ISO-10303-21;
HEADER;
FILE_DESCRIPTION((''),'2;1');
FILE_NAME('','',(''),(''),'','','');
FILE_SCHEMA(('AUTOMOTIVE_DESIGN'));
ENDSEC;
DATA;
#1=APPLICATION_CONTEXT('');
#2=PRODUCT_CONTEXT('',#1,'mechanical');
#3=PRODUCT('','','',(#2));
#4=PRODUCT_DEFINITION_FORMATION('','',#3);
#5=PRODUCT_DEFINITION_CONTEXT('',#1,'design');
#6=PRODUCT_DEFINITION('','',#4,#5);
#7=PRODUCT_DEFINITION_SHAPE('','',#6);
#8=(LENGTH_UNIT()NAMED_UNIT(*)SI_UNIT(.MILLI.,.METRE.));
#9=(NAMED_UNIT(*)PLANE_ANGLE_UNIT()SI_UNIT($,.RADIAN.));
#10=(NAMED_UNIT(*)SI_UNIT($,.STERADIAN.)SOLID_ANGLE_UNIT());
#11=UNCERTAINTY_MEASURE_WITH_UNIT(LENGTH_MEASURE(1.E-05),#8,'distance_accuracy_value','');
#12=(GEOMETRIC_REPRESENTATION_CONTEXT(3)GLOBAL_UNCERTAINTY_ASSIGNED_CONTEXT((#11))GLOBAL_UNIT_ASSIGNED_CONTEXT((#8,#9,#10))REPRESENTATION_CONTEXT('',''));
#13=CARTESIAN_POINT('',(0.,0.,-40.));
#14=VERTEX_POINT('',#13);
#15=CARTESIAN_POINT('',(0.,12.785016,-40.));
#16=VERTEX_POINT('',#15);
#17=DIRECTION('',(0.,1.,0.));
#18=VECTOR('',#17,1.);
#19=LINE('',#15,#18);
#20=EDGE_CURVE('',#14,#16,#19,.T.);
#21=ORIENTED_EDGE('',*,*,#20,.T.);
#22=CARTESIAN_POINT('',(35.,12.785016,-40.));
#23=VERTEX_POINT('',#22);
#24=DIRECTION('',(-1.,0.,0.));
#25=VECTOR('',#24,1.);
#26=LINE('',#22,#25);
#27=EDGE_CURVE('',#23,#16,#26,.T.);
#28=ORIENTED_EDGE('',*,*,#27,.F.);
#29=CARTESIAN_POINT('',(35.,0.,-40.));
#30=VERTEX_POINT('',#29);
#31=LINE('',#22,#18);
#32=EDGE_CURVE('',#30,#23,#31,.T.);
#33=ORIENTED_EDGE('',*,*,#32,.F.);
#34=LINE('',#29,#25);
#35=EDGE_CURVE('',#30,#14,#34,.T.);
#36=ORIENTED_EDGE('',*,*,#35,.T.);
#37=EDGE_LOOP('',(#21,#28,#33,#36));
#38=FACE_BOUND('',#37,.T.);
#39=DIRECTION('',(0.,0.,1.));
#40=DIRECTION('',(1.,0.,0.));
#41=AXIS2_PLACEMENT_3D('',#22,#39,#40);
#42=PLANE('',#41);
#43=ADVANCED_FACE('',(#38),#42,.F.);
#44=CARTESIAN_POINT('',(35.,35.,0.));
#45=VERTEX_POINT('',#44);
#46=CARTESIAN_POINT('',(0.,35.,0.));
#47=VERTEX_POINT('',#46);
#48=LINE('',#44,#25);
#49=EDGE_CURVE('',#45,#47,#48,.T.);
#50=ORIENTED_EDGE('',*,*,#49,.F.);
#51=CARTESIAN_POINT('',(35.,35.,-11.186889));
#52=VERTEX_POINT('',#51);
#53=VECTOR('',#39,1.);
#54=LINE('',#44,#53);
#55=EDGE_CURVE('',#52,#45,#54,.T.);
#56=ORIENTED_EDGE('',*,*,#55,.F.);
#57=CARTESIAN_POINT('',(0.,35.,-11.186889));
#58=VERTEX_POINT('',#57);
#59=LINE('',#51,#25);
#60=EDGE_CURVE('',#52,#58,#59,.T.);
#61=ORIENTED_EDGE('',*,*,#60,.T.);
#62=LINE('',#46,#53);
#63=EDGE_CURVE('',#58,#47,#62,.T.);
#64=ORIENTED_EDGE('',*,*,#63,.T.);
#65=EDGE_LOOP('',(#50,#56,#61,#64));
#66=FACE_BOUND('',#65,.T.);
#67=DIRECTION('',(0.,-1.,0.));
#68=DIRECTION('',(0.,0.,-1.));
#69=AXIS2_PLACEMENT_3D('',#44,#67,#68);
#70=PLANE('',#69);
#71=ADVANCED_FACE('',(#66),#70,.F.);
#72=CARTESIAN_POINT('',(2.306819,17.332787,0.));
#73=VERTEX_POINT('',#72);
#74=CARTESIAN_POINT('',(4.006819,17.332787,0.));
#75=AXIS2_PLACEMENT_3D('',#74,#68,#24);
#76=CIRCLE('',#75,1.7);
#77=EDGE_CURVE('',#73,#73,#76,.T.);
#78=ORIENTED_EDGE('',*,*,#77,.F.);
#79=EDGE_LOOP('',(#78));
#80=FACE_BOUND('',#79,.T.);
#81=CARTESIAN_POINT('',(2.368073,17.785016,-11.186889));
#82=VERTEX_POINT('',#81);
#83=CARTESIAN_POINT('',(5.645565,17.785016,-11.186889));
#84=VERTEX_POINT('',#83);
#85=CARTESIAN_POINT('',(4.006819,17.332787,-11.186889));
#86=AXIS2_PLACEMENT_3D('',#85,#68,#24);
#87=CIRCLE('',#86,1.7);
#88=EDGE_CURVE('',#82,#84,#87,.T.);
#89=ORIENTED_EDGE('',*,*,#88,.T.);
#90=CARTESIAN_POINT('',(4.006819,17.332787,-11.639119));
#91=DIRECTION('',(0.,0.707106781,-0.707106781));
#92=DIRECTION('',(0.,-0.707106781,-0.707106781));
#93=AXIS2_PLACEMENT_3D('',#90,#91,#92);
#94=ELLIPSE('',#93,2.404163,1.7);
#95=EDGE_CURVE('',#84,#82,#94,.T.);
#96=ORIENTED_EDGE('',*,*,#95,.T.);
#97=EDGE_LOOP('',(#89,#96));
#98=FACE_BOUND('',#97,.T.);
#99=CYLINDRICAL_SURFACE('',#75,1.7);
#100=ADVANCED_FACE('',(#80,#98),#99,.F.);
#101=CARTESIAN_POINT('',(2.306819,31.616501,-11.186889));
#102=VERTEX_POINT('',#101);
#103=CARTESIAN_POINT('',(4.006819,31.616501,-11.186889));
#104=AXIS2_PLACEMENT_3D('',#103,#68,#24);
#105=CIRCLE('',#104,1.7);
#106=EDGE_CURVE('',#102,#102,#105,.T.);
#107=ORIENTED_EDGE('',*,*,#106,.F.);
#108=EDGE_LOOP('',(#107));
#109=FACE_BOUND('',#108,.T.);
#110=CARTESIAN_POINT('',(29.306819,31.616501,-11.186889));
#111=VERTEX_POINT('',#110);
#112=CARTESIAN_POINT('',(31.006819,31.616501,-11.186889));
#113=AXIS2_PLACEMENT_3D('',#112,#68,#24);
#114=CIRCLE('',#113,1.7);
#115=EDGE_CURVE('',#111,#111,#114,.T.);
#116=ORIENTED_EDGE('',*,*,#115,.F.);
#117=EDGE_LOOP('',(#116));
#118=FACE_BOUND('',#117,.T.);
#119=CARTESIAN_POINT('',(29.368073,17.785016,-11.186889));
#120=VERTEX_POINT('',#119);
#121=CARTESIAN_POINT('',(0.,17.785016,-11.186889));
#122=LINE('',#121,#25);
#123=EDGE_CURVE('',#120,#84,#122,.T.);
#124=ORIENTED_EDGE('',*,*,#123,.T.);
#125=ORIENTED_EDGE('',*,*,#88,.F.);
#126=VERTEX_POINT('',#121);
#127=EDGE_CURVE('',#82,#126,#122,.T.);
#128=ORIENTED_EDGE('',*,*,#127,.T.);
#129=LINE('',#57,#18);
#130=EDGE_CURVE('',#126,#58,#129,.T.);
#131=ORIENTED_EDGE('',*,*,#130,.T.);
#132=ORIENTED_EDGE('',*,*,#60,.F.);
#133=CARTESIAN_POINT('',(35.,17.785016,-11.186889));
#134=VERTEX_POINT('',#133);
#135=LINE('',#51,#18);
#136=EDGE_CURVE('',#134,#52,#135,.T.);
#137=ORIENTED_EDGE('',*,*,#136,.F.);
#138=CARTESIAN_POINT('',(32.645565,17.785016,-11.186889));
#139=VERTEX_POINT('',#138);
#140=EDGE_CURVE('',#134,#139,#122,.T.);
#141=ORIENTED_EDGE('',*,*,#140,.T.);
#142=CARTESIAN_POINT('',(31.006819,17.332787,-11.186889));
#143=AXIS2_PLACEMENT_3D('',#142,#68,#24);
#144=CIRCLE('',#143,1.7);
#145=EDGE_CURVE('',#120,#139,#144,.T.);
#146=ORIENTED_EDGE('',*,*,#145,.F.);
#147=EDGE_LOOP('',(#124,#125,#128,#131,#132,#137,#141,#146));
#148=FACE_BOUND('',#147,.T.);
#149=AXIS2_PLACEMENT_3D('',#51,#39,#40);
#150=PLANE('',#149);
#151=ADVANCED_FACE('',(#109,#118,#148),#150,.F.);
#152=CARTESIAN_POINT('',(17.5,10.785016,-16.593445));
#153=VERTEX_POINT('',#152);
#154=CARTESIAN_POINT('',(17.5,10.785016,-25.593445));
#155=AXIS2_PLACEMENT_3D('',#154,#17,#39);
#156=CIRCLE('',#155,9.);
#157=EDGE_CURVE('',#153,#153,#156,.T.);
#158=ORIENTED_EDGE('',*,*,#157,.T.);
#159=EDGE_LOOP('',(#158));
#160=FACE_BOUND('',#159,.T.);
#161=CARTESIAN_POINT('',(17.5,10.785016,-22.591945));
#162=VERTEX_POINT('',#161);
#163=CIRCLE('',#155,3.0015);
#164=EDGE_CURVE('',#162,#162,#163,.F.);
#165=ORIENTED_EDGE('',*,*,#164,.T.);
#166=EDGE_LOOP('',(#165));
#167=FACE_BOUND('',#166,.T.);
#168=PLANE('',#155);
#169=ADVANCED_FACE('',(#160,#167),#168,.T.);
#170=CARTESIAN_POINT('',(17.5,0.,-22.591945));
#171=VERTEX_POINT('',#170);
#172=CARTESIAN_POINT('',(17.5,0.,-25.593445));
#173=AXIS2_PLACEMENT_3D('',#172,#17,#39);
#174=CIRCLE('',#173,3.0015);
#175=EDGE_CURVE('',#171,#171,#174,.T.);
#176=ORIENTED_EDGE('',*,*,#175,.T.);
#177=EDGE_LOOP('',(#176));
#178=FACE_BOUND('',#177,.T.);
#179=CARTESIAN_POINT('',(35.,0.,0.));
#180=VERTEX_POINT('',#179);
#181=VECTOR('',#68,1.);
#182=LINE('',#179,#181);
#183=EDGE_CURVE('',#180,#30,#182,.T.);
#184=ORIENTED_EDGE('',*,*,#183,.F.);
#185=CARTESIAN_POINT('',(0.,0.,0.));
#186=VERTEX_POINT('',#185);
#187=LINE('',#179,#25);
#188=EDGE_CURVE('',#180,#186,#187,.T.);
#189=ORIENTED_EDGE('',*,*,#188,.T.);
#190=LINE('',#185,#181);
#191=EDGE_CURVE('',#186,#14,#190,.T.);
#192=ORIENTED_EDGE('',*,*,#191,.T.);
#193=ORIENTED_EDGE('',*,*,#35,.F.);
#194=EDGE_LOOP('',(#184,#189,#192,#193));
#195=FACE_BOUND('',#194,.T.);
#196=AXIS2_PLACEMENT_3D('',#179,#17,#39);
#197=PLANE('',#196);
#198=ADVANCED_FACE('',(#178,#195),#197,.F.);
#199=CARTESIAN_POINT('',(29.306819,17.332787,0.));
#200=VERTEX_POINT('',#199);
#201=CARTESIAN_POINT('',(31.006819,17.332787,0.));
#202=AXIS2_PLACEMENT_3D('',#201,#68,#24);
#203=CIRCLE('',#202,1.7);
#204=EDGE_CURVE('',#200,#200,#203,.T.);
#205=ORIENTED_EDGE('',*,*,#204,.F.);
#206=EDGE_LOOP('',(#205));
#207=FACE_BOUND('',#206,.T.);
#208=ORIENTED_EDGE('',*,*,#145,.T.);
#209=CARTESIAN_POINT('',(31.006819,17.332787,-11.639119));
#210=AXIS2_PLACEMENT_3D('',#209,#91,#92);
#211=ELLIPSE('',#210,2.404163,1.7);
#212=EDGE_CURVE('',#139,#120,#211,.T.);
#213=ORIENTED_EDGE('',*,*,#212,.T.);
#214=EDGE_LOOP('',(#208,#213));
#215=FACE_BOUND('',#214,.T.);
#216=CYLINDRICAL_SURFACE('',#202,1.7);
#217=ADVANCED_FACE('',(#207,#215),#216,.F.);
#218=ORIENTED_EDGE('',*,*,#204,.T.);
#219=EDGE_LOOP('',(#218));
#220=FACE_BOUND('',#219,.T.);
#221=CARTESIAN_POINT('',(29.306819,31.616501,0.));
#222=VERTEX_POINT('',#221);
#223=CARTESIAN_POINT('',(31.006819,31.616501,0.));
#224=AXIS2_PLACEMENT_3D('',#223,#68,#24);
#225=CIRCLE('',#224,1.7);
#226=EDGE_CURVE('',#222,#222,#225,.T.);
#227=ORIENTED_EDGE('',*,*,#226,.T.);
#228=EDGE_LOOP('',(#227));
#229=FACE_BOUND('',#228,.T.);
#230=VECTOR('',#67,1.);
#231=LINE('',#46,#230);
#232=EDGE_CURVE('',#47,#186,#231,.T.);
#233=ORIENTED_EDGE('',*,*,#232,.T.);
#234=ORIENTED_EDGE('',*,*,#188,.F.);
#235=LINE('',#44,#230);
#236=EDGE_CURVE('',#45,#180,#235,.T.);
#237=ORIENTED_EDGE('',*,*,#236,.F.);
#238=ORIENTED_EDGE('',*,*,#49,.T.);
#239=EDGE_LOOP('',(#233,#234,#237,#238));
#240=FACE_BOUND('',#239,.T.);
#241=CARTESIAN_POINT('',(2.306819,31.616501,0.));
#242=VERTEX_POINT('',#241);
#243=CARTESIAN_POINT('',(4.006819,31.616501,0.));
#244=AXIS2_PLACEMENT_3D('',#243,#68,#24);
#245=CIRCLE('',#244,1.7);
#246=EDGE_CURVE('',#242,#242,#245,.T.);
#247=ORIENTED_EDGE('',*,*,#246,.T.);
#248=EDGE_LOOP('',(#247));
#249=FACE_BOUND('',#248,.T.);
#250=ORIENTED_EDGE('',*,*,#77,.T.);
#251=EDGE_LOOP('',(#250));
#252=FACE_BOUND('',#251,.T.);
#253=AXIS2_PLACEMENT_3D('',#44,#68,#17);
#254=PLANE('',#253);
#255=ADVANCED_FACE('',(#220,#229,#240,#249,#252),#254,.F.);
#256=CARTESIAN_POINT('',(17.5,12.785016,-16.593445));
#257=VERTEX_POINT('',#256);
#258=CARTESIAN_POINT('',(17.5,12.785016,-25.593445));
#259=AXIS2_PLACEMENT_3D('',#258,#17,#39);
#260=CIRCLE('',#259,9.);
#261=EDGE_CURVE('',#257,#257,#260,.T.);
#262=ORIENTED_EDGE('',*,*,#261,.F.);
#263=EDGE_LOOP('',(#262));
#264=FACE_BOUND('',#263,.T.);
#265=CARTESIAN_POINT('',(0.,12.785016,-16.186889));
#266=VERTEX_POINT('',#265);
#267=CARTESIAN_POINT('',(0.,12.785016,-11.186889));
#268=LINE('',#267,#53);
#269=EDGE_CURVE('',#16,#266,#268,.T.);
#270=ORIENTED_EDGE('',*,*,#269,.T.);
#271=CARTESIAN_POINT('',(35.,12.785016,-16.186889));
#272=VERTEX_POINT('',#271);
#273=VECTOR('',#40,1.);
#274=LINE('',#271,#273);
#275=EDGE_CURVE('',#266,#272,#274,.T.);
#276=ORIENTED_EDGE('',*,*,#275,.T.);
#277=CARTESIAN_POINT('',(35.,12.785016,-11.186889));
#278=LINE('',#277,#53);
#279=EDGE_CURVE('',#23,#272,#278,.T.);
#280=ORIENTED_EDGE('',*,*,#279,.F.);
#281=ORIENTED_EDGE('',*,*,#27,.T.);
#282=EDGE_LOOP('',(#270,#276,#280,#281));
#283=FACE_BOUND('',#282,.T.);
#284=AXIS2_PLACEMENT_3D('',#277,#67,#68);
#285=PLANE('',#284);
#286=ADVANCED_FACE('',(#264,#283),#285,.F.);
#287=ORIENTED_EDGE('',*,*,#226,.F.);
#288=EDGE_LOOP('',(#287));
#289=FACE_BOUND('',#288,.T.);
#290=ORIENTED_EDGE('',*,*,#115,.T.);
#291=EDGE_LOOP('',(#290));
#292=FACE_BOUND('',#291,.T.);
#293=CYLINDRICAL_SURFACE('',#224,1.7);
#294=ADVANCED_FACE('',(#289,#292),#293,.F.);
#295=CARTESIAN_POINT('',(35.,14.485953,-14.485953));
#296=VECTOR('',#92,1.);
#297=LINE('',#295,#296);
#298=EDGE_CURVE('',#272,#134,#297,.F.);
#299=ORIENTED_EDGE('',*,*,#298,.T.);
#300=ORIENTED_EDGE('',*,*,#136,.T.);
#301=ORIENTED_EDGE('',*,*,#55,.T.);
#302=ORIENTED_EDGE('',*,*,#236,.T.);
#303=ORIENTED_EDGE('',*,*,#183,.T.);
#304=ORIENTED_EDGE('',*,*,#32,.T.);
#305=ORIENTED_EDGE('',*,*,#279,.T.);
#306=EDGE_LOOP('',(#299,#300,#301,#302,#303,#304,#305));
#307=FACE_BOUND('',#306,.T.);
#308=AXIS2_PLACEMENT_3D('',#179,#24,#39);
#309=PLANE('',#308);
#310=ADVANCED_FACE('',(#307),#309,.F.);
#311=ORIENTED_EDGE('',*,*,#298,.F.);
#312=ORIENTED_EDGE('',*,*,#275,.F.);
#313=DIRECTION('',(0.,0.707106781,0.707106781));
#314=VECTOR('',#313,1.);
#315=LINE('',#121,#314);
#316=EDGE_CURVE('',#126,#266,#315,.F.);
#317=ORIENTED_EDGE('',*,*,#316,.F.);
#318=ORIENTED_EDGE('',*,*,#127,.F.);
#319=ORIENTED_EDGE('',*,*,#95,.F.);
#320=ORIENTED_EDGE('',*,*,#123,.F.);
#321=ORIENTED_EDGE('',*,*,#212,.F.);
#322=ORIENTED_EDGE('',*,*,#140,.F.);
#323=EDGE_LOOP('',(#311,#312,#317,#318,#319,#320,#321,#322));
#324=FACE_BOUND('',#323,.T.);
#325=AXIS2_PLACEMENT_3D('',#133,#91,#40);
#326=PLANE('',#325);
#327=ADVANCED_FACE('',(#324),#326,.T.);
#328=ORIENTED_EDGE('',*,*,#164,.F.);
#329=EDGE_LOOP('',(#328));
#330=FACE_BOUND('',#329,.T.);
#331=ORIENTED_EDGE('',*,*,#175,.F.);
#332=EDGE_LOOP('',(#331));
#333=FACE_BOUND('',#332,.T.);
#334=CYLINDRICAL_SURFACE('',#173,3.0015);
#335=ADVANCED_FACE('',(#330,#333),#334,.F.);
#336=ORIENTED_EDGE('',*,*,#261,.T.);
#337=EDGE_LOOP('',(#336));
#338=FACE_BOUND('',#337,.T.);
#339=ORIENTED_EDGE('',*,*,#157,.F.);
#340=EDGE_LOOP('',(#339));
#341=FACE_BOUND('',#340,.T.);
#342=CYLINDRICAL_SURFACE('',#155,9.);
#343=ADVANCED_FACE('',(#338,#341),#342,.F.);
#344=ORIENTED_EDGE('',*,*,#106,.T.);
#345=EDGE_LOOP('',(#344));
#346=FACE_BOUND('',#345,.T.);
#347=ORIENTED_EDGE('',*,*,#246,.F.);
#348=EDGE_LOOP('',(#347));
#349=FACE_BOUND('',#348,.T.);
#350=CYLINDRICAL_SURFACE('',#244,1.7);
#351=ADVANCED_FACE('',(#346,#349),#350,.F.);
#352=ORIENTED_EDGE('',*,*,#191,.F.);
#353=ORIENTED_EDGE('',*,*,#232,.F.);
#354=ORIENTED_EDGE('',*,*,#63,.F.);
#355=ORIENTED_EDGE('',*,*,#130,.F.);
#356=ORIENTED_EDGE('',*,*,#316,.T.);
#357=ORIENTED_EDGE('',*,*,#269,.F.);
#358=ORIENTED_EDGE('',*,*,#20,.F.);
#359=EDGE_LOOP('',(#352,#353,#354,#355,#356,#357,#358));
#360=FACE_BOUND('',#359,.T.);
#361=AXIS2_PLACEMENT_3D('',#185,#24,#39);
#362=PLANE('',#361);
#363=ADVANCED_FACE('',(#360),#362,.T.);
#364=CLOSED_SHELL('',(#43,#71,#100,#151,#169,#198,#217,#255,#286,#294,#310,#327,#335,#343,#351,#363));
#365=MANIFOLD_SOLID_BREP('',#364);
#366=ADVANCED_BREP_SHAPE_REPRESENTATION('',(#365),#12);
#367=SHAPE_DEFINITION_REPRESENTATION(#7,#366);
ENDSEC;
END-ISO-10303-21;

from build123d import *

# Parameters (mm, degrees)
BOSS_EXTRUDE1_DEPTH = 35
SKETCH3_R           = 3.0015
CUT_EXTRUDE1_DEPTH  = 58.606470928
SKETCH3_5_R         = 9
CUT_EXTRUDE2_DEPTH  = 2
SKETCH4_R           = 1.7
CUT_EXTRUDE3_DEPTH  = 58.272989631
CHAMFER1_SIZE       = 5


with BuildPart() as part:
    # Sketch1 → Boss-Extrude1 (new body)
    with BuildSketch(Plane(origin=(0, 0, 0), x_dir=(0, 0, -1), z_dir=(1, 0, 0))):
        Polygon((0, 35), (0, 0), (40, 0), (40, 12.785016481), (11.186889421, 12.785016481), (11.186889421, 35), align=None)
    extrude(amount=BOSS_EXTRUDE1_DEPTH)

    # Sketch3 → Cut-Extrude1 (cut, through all)
    with BuildSketch(Plane(origin=(0, 12.785016481, 0), x_dir=(1, 0, 0), z_dir=(0, 1, 0))):
        with Locations(Location((17.5, 25.59344471, 0), (0, 0, 270))):
            Circle(SKETCH3_R)
    extrude(amount=-CUT_EXTRUDE1_DEPTH, mode=Mode.SUBTRACT)

    # Sketch3<5> → Cut-Extrude2 (cut)
    with BuildSketch(Plane(origin=(0, 12.785016481, 0), x_dir=(1, 0, 0), z_dir=(0, 1, 0))):
        with Locations(Location((17.5, 25.59344471, 0), (0, 0, 270))):
            Circle(SKETCH3_5_R)
    extrude(amount=-CUT_EXTRUDE2_DEPTH, mode=Mode.SUBTRACT)

    # Sketch4 → Cut-Extrude3 (cut, through all)
    with BuildSketch(Plane(origin=(0, 0, -11.186889421), x_dir=(-1, 0, 0), z_dir=(0, 0, -1))):
        with Locations((-31.00681869, 31.616501478)):
            Circle(SKETCH4_R)
        with Locations((-31.00681869, 17.332786674)):
            Circle(SKETCH4_R)
        with Locations((-4.00681869, 17.332786674)):
            Circle(SKETCH4_R)
        with Locations((-4.00681869, 31.616501478)):
            Circle(SKETCH4_R)
    extrude(amount=-CUT_EXTRUDE3_DEPTH, mode=Mode.SUBTRACT)

    # Chamfer1
    # the kernel refuses this chamfer: 5 mm, written as the material it adds along each edge
    with BuildSketch(Plane(origin=(0, 12.785016481, -11.186889421), x_dir=(0, 0.9996219169112968, 0.02749587661058631), z_dir=(1, 0, 0))) as chamfer1_piece_1_section:
        Polygon((CHAMFER1_SIZE * 0.999621916911, -CHAMFER1_SIZE * 0.0274958766106), (-CHAMFER1_SIZE * 0.0274958766106, -CHAMFER1_SIZE * 0.999621916911), (0, 0), align=None)
    chamfer1_piece_1 = extrude(amount=35, mode=Mode.PRIVATE)
    chamfer1_piece_1 = chamfer1_piece_1 - Plane(origin=(31.00681869, 17.332786674, -12.868450171), x_dir=(-1, 0, 0), z_dir=(0, 0, -1)) * Cylinder(1.7, 90, mode=Mode.PRIVATE)
    chamfer1_piece_1 = chamfer1_piece_1 - Plane(origin=(4.00681869, 17.332786674, -12.868450171), x_dir=(-1, 0, 0), z_dir=(0, 0, -1)) * Cylinder(1.7, 90, mode=Mode.PRIVATE)
    add(chamfer1_piece_1)


solid = part.part
